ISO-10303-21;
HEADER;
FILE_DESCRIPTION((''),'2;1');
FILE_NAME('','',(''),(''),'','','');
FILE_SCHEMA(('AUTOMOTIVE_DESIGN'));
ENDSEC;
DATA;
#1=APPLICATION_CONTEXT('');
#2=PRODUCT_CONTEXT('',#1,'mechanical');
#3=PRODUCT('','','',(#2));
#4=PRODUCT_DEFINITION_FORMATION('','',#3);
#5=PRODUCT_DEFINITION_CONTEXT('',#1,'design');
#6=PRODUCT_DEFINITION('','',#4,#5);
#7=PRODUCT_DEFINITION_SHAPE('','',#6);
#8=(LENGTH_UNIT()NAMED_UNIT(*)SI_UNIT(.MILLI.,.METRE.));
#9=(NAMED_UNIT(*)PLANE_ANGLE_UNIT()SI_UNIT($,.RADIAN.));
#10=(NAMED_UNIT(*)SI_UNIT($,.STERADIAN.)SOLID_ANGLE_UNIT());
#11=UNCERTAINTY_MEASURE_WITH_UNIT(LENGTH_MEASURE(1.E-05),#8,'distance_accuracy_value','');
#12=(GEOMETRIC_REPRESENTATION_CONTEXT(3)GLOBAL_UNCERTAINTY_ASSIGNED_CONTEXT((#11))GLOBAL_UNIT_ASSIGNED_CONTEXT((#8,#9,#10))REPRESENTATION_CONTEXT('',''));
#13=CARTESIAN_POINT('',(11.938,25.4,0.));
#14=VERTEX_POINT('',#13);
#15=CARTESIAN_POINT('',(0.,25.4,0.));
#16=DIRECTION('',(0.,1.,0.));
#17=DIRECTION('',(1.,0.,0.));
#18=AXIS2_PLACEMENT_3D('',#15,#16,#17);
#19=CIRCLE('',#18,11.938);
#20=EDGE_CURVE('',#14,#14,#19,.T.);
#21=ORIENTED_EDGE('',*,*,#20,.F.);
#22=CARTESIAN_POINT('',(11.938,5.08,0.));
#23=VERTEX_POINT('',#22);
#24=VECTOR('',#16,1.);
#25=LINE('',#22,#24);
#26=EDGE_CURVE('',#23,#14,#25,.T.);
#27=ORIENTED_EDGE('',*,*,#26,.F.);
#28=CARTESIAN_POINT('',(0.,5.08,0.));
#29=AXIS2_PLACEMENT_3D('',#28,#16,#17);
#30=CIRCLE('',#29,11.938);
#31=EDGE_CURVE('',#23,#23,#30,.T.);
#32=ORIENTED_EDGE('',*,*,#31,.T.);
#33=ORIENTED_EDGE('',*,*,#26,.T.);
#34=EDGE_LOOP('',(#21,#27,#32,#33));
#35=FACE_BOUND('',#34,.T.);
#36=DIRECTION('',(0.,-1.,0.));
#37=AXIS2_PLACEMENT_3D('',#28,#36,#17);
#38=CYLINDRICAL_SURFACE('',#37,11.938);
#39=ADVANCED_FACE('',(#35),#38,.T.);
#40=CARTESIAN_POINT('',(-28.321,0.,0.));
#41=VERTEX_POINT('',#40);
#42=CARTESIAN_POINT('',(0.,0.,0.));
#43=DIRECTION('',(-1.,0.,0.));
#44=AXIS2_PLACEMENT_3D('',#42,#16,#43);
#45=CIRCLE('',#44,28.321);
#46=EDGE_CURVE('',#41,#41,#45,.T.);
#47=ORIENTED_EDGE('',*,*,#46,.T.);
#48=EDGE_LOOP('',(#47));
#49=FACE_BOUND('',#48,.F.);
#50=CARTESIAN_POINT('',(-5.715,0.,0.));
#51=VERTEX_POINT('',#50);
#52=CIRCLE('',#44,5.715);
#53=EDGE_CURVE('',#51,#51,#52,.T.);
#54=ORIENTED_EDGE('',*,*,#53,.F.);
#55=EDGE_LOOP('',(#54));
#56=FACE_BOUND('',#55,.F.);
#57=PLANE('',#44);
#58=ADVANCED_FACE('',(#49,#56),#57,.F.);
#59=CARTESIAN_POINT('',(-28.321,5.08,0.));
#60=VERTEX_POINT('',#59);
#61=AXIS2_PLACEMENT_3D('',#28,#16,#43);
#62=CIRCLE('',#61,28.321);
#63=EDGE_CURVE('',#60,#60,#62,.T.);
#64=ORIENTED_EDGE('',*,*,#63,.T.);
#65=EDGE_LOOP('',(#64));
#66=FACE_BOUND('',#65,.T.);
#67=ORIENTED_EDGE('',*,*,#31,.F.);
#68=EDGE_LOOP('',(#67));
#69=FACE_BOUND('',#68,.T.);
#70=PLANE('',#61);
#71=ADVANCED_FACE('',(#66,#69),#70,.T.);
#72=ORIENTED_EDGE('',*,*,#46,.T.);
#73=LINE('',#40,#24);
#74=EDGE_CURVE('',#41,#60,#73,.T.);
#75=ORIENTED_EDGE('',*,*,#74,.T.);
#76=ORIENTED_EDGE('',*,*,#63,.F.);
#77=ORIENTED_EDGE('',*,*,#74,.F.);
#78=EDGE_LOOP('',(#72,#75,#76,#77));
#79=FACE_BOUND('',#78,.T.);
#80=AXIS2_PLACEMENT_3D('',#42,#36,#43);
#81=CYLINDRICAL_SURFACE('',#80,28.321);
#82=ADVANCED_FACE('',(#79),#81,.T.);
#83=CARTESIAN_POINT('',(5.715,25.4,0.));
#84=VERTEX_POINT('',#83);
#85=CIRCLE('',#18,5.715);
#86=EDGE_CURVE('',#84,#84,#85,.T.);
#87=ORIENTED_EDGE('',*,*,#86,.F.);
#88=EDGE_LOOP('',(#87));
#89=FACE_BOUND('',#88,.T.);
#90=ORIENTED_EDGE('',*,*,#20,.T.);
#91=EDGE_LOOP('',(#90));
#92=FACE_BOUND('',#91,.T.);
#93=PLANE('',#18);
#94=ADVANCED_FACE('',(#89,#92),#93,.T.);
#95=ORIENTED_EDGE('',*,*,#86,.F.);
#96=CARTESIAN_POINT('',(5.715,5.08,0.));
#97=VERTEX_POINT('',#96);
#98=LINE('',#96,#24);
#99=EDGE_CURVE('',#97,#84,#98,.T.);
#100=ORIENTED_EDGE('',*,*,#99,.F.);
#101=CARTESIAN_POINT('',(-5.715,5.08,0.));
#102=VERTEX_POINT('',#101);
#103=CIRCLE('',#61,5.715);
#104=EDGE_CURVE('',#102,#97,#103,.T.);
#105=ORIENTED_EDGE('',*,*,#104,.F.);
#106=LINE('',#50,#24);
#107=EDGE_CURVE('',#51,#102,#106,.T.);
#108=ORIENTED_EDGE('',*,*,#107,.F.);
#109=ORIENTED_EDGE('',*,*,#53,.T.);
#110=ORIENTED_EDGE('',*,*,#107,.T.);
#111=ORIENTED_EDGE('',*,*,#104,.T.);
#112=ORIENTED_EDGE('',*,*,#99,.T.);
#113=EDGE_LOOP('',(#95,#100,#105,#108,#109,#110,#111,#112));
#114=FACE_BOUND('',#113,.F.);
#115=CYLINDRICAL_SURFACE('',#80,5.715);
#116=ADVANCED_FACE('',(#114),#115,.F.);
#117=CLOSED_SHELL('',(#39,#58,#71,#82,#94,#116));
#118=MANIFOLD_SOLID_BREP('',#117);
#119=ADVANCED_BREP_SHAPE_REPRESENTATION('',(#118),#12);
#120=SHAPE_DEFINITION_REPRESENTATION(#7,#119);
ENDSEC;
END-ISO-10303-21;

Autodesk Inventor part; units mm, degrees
ref_plane "YZ Plane" through (0, 0, 0) normal (1, 0, 0) x (0, 1, 0)
ref_plane "XZ Plane" through (0, 0, 0) normal (0, 1, 0) x (-1, 0, 0)
ref_plane "XY Plane" through (0, 0, 0) normal (0, 0, 1) x (1, 0, 0)
sketch "Sketch1" plane through (0, 0, 0) normal (0, 1, 0) x (-1, 0, 0)
  circle A0 centre (0, 0) radius 5.715
  circle A1 centre (0, 0) radius 28.321
  dimension "d0" = 56.642
  dimension "d1" = 11.43
extrude "Extrusion1" add sketch "Sketch1" along normal blind 5.08
sketch "Sketch2" plane through (0, 5.08, 0) normal (0, 1, 0) x (1, 0, 0)
  circle A0 centre (0, 0) radius 11.938
  circle A1 centre (0, 0) radius 5.715
  dimension "d5" = 23.876
  dimension "d6" = 11.43
extrude "Extrusion2" add sketch "Sketch2" along normal blind 20.32
properties part number "Motor hub"
